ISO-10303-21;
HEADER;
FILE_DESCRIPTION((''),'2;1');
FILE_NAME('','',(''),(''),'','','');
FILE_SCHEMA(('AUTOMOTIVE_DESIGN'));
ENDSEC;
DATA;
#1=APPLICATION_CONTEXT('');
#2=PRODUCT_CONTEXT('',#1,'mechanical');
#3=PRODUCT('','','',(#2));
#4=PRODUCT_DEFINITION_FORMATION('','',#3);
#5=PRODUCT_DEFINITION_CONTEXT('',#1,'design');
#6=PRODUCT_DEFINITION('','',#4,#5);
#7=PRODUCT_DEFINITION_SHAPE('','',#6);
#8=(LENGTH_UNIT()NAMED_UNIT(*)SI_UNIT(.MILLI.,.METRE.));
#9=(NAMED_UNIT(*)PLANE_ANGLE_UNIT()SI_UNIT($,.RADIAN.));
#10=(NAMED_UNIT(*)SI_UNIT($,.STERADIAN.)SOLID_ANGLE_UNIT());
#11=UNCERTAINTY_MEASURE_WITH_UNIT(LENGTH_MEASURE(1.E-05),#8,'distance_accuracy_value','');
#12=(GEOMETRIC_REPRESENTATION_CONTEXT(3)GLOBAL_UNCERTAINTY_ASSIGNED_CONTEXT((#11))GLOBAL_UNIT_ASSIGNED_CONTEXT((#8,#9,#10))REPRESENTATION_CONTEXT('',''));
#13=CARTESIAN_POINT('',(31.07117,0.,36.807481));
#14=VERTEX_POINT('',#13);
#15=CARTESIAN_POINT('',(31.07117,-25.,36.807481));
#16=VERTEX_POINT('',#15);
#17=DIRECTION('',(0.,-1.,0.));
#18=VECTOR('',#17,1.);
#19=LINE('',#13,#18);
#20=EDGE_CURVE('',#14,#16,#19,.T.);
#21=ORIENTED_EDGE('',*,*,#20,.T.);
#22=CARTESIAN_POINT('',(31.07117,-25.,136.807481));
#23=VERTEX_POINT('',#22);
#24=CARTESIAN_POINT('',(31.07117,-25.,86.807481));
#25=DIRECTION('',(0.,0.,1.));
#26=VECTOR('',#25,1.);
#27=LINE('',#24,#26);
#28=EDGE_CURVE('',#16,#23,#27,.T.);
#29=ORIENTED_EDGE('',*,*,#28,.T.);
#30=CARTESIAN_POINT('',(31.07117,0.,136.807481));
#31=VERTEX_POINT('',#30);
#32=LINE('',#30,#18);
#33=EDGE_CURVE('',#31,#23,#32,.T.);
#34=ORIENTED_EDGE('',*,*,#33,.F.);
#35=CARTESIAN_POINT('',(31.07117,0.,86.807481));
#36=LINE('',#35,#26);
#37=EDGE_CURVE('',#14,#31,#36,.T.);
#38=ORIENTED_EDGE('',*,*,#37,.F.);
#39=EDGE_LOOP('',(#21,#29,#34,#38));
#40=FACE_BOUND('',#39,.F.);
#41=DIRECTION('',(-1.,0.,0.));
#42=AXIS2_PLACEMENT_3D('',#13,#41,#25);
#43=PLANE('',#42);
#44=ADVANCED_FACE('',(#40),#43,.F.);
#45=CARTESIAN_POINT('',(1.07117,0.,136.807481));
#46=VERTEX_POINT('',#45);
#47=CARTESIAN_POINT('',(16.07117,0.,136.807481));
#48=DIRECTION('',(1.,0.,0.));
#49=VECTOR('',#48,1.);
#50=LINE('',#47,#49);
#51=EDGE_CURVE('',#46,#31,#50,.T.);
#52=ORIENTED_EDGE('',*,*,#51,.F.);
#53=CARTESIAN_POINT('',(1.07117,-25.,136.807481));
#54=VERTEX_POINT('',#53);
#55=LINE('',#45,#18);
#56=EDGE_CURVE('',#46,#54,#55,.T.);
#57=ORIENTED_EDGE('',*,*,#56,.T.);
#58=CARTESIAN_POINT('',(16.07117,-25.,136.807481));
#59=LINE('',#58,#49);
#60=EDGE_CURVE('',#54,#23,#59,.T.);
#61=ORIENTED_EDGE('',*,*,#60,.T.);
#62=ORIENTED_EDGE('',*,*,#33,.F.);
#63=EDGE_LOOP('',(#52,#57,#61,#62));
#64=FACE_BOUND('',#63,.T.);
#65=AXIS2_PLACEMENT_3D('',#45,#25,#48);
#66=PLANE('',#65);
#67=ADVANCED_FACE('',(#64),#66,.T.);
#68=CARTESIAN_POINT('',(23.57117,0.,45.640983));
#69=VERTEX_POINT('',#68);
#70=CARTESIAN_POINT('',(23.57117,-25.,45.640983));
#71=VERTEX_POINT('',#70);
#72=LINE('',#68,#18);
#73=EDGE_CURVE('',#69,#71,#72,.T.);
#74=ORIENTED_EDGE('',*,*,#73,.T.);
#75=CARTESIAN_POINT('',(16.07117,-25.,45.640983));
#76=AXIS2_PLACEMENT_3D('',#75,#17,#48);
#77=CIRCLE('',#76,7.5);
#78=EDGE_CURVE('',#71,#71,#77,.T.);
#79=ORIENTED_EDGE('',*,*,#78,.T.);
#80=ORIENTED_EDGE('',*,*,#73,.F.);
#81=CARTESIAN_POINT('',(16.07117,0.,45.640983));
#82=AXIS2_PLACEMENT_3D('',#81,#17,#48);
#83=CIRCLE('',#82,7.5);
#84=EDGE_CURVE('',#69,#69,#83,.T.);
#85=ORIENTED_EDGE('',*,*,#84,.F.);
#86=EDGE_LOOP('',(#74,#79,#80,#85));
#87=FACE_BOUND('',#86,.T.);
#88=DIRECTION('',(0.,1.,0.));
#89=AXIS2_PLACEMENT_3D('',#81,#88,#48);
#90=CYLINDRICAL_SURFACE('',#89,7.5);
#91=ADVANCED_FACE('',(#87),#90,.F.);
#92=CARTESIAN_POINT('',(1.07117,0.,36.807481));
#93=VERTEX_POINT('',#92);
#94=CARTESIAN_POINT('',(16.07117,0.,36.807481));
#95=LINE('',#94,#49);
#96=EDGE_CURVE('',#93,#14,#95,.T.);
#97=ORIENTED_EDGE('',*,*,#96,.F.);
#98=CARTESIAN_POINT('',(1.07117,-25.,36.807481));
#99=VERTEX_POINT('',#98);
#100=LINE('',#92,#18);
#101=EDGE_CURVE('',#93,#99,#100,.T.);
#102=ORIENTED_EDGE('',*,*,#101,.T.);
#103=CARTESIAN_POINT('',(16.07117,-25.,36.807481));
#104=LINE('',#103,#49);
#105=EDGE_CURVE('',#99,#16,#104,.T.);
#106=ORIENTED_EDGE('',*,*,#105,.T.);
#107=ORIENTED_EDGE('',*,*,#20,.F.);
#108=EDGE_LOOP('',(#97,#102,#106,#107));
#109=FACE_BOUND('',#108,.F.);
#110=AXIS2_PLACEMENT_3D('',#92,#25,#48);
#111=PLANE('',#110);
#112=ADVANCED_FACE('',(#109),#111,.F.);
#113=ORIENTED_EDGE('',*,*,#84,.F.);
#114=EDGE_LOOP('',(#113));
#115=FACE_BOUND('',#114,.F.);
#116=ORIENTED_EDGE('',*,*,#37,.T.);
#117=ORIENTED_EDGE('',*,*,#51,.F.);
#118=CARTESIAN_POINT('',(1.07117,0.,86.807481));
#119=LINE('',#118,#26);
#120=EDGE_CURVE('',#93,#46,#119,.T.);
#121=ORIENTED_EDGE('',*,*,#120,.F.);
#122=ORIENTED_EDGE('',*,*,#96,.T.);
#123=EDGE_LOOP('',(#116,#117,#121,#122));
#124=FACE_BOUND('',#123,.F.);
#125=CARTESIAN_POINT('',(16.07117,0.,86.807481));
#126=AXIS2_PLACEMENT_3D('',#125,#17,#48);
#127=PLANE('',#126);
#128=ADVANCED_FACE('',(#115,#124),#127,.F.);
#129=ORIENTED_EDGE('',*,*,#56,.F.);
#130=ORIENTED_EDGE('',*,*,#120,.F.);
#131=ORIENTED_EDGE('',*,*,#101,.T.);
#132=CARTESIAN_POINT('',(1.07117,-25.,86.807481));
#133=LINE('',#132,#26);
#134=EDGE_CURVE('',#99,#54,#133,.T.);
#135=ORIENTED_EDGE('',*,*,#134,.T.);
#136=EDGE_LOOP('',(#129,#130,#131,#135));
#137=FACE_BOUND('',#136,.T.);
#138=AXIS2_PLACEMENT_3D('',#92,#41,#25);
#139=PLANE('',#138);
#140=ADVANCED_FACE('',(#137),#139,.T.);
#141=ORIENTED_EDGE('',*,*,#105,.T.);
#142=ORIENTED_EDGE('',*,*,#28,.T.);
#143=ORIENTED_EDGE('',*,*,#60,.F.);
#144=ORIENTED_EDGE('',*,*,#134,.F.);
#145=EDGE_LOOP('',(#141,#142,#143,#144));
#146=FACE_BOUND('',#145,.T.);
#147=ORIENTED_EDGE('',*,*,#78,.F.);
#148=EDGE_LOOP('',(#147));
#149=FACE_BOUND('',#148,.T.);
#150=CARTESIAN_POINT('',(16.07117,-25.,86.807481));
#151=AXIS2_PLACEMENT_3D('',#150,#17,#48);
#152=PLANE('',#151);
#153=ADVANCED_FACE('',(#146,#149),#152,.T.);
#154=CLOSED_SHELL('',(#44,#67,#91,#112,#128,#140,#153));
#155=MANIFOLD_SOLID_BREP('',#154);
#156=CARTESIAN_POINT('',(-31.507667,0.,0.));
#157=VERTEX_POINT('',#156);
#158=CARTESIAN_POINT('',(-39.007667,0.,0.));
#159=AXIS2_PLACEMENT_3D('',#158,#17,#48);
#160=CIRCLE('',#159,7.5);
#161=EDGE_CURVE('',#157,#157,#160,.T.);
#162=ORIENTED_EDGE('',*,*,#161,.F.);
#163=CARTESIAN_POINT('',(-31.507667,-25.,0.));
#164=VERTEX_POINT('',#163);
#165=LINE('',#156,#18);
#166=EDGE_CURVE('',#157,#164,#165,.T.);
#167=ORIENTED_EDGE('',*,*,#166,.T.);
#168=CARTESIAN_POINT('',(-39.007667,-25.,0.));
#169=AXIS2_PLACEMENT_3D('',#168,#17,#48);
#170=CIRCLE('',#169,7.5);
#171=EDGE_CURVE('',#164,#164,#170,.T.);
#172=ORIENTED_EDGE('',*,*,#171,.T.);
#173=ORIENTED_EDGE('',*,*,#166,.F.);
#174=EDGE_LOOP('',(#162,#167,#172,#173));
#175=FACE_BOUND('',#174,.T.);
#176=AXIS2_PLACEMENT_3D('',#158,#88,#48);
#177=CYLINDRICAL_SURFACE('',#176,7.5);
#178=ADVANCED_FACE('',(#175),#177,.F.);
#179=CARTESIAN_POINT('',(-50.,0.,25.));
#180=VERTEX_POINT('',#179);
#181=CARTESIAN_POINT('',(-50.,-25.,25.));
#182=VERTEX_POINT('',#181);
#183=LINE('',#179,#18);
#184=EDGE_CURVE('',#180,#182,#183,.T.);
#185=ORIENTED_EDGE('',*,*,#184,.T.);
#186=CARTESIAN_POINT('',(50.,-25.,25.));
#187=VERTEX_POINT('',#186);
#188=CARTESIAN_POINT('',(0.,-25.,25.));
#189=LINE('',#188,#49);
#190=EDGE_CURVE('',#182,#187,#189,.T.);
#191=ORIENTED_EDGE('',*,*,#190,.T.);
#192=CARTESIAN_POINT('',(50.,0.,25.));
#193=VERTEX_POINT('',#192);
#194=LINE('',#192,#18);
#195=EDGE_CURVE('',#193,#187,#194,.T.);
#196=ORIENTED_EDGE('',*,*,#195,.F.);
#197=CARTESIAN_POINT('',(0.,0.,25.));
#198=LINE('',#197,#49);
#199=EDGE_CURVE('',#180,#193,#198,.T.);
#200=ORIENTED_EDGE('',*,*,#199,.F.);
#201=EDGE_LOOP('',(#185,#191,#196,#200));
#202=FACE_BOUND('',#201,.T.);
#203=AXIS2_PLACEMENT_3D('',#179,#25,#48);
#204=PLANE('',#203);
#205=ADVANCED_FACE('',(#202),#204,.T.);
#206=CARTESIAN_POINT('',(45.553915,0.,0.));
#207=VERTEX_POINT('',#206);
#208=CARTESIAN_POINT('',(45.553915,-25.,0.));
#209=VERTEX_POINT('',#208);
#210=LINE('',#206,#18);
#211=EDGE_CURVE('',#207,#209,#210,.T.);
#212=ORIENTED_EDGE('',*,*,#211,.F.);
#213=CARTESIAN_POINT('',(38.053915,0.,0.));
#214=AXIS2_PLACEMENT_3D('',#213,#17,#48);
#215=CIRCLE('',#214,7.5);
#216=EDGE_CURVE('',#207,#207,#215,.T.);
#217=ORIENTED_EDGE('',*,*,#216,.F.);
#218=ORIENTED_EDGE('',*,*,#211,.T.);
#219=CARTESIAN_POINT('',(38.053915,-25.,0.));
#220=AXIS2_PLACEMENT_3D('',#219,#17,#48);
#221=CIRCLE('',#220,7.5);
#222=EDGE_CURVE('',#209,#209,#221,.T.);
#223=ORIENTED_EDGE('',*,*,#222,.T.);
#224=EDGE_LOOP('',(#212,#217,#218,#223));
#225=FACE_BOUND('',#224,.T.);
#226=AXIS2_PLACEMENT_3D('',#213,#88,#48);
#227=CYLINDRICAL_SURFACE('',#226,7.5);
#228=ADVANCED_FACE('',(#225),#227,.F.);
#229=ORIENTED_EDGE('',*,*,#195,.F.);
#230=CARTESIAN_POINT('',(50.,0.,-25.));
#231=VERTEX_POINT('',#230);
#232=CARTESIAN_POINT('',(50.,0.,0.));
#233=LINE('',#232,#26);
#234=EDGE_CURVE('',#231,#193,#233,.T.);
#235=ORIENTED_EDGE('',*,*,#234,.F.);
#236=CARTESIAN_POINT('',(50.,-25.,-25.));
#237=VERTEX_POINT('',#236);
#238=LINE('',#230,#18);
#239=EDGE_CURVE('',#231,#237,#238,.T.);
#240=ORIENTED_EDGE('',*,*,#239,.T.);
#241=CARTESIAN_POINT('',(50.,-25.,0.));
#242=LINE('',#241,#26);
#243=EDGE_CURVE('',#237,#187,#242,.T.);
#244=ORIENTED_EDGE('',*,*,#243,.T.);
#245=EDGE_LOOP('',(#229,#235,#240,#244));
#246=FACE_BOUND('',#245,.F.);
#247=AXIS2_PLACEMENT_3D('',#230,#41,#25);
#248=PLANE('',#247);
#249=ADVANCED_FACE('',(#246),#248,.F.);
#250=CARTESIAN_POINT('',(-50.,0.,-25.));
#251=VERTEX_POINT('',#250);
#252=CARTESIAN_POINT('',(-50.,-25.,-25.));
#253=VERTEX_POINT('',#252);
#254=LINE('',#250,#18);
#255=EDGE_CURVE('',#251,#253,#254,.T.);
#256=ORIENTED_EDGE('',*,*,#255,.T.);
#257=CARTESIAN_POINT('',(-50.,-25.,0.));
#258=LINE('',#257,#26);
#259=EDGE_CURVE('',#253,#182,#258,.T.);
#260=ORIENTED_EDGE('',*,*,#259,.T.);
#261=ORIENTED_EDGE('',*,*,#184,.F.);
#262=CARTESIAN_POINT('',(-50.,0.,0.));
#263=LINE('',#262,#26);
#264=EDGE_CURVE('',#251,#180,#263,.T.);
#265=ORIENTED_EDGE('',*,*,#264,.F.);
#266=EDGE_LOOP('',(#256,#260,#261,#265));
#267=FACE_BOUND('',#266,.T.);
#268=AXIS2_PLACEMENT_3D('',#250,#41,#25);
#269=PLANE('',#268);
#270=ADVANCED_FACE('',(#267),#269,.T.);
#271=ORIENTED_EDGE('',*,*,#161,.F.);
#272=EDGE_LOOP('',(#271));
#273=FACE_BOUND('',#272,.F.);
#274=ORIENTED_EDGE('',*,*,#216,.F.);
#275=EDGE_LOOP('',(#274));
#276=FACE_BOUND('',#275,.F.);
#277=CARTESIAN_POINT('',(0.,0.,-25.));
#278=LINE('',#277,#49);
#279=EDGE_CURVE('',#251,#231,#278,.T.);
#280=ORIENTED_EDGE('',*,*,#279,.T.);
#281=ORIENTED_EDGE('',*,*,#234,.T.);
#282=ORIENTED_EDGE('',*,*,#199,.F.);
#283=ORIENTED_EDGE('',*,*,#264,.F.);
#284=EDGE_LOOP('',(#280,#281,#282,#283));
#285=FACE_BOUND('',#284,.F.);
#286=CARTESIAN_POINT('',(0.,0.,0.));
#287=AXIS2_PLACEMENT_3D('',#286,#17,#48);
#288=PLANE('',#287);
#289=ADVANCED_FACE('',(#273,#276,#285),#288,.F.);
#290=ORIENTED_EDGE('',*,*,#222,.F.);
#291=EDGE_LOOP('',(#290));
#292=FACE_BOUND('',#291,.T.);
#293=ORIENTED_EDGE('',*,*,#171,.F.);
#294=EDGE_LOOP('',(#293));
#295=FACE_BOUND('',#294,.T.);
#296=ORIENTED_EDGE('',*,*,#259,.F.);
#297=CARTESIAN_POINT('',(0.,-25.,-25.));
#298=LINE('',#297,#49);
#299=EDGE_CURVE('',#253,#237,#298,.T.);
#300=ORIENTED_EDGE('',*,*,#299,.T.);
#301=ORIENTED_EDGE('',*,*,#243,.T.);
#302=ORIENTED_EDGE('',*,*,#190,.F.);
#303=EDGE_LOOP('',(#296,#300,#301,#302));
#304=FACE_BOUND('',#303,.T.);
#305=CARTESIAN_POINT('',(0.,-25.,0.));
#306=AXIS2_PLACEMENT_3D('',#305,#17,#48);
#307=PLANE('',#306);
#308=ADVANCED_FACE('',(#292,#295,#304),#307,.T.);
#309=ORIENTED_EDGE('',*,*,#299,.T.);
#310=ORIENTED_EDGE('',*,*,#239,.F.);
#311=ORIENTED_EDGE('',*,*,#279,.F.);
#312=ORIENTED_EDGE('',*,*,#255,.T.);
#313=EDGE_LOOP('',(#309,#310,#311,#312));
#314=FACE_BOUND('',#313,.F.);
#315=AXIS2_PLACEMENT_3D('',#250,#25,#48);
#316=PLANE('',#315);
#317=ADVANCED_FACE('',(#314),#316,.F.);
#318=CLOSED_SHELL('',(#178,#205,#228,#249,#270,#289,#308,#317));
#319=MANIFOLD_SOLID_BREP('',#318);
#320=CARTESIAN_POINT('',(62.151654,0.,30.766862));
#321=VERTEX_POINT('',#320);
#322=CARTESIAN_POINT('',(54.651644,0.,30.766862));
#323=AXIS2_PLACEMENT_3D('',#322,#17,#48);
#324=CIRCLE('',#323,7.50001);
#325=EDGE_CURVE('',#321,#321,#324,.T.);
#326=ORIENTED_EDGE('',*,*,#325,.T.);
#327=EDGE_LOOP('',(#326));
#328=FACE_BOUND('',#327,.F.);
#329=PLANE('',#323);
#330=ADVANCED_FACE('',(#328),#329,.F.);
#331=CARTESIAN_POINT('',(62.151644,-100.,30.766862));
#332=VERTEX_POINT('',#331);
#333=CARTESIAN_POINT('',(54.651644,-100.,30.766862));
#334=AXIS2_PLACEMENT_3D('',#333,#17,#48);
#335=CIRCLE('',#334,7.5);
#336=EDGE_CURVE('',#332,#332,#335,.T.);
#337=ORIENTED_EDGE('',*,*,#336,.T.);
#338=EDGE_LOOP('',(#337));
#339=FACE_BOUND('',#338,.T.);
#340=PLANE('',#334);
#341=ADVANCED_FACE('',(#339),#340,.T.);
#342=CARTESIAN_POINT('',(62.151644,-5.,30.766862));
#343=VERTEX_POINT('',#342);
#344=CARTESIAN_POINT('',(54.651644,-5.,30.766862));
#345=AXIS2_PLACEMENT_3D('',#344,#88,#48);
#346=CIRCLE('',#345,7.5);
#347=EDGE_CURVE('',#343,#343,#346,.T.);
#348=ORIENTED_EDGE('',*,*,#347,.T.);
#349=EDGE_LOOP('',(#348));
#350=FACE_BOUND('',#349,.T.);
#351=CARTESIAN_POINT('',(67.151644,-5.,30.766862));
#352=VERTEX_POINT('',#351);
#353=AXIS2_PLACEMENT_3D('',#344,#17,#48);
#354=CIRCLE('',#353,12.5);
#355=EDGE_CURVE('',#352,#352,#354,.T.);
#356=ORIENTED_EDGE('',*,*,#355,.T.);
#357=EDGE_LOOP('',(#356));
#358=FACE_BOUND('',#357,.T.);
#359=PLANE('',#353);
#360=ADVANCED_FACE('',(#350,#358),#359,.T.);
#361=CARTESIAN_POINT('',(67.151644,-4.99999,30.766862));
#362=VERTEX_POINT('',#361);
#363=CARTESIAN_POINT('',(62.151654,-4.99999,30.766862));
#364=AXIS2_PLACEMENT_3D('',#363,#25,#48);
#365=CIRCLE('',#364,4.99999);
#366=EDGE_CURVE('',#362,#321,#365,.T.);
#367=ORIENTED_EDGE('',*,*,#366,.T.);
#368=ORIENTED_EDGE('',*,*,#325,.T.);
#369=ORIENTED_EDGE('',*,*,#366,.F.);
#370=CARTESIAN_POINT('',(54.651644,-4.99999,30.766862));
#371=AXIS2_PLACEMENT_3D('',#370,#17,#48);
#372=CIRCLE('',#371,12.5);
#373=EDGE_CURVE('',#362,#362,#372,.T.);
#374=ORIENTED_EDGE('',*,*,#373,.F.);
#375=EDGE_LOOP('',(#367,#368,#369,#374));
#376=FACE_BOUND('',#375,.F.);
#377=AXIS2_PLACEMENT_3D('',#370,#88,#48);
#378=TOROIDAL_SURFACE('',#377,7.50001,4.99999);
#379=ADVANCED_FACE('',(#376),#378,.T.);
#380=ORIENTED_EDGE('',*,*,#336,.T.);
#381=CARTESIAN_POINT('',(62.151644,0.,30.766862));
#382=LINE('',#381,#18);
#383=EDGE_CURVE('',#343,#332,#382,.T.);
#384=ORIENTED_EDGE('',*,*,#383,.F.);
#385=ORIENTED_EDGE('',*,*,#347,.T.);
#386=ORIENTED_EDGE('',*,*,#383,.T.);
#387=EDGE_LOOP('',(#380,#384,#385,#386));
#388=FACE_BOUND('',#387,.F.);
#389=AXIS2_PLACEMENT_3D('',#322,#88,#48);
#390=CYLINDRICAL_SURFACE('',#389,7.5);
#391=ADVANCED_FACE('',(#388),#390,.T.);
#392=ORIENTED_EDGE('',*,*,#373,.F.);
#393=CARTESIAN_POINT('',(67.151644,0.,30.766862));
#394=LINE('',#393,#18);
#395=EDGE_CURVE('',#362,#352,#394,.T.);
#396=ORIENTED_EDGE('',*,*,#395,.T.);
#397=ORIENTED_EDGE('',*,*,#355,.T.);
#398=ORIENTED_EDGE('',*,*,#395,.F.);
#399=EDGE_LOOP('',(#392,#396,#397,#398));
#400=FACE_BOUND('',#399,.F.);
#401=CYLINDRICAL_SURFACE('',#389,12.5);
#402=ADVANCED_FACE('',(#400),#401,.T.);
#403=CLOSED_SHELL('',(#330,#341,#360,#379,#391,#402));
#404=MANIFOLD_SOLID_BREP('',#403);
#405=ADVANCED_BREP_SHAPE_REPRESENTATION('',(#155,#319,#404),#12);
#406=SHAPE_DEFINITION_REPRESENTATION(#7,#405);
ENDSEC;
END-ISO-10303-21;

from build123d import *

# Parameters (mm, degrees)
F0_W     = 100
F0_H     = 50
F0_R     = 7.5
F1_DEPTH = 25
F2_W     = 30
F2_H     = 100
F2_R     = 7.5
F3_DEPTH = 25
F4_R     = 7.5
F5_DEPTH = 100
F6_R     = 12.5
F7_DEPTH = 5
F8_R     = 4.99999


# Not quite as in the source:
# - a fillet or chamfer is up to 0.001 mm smaller than in the source, because OpenCascade refuses the exact size


with BuildPart() as f1:
    # F0 (on Front) → F1 (new body)
    with BuildSketch(Plane.XZ):
        Rectangle(F0_W, F0_H)
        with Locations((-39.0076674521, 0)):
            Circle(F0_R, mode=Mode.SUBTRACT)
        with Locations((38.0539149046, 0)):
            Circle(F0_R, mode=Mode.SUBTRACT)
    extrude(amount=F1_DEPTH)


with BuildPart() as f3:
    # F2 (on Front) → F3 (new body)
    with BuildSketch(Plane.XZ):
        with Locations((16.0711699724, 86.8074811995)):
            Rectangle(F2_W, F2_H)
        with Locations((16.0711699724, 45.6409826875)):
            Circle(F2_R, mode=Mode.SUBTRACT)
    extrude(amount=F3_DEPTH)


with BuildPart() as f5:
    # F4 (on Front) → F5 (new body)
    with BuildSketch(Plane.XZ):
        with Locations((54.6516440809, 30.7668615133)):
            Circle(F4_R)
    extrude(amount=F5_DEPTH)

    # F6 (on Front) → F7 (join)
    with BuildSketch(Plane.XZ):
        with Locations((54.6516440809, 30.7668615133)):
            Circle(F6_R)
    extrude(amount=F7_DEPTH)

    # F8 (radius 5 in the source; OpenCascade refuses exactly that, so slightly less here)
    f8_edges = [f5.edges().sort_by_distance(p)[0] for p in [
        (42.151644, 0, 30.766862),
    ]]
    fillet(f8_edges, radius=F8_R)


solid = Compound([f1.part, f3.part, f5.part])
